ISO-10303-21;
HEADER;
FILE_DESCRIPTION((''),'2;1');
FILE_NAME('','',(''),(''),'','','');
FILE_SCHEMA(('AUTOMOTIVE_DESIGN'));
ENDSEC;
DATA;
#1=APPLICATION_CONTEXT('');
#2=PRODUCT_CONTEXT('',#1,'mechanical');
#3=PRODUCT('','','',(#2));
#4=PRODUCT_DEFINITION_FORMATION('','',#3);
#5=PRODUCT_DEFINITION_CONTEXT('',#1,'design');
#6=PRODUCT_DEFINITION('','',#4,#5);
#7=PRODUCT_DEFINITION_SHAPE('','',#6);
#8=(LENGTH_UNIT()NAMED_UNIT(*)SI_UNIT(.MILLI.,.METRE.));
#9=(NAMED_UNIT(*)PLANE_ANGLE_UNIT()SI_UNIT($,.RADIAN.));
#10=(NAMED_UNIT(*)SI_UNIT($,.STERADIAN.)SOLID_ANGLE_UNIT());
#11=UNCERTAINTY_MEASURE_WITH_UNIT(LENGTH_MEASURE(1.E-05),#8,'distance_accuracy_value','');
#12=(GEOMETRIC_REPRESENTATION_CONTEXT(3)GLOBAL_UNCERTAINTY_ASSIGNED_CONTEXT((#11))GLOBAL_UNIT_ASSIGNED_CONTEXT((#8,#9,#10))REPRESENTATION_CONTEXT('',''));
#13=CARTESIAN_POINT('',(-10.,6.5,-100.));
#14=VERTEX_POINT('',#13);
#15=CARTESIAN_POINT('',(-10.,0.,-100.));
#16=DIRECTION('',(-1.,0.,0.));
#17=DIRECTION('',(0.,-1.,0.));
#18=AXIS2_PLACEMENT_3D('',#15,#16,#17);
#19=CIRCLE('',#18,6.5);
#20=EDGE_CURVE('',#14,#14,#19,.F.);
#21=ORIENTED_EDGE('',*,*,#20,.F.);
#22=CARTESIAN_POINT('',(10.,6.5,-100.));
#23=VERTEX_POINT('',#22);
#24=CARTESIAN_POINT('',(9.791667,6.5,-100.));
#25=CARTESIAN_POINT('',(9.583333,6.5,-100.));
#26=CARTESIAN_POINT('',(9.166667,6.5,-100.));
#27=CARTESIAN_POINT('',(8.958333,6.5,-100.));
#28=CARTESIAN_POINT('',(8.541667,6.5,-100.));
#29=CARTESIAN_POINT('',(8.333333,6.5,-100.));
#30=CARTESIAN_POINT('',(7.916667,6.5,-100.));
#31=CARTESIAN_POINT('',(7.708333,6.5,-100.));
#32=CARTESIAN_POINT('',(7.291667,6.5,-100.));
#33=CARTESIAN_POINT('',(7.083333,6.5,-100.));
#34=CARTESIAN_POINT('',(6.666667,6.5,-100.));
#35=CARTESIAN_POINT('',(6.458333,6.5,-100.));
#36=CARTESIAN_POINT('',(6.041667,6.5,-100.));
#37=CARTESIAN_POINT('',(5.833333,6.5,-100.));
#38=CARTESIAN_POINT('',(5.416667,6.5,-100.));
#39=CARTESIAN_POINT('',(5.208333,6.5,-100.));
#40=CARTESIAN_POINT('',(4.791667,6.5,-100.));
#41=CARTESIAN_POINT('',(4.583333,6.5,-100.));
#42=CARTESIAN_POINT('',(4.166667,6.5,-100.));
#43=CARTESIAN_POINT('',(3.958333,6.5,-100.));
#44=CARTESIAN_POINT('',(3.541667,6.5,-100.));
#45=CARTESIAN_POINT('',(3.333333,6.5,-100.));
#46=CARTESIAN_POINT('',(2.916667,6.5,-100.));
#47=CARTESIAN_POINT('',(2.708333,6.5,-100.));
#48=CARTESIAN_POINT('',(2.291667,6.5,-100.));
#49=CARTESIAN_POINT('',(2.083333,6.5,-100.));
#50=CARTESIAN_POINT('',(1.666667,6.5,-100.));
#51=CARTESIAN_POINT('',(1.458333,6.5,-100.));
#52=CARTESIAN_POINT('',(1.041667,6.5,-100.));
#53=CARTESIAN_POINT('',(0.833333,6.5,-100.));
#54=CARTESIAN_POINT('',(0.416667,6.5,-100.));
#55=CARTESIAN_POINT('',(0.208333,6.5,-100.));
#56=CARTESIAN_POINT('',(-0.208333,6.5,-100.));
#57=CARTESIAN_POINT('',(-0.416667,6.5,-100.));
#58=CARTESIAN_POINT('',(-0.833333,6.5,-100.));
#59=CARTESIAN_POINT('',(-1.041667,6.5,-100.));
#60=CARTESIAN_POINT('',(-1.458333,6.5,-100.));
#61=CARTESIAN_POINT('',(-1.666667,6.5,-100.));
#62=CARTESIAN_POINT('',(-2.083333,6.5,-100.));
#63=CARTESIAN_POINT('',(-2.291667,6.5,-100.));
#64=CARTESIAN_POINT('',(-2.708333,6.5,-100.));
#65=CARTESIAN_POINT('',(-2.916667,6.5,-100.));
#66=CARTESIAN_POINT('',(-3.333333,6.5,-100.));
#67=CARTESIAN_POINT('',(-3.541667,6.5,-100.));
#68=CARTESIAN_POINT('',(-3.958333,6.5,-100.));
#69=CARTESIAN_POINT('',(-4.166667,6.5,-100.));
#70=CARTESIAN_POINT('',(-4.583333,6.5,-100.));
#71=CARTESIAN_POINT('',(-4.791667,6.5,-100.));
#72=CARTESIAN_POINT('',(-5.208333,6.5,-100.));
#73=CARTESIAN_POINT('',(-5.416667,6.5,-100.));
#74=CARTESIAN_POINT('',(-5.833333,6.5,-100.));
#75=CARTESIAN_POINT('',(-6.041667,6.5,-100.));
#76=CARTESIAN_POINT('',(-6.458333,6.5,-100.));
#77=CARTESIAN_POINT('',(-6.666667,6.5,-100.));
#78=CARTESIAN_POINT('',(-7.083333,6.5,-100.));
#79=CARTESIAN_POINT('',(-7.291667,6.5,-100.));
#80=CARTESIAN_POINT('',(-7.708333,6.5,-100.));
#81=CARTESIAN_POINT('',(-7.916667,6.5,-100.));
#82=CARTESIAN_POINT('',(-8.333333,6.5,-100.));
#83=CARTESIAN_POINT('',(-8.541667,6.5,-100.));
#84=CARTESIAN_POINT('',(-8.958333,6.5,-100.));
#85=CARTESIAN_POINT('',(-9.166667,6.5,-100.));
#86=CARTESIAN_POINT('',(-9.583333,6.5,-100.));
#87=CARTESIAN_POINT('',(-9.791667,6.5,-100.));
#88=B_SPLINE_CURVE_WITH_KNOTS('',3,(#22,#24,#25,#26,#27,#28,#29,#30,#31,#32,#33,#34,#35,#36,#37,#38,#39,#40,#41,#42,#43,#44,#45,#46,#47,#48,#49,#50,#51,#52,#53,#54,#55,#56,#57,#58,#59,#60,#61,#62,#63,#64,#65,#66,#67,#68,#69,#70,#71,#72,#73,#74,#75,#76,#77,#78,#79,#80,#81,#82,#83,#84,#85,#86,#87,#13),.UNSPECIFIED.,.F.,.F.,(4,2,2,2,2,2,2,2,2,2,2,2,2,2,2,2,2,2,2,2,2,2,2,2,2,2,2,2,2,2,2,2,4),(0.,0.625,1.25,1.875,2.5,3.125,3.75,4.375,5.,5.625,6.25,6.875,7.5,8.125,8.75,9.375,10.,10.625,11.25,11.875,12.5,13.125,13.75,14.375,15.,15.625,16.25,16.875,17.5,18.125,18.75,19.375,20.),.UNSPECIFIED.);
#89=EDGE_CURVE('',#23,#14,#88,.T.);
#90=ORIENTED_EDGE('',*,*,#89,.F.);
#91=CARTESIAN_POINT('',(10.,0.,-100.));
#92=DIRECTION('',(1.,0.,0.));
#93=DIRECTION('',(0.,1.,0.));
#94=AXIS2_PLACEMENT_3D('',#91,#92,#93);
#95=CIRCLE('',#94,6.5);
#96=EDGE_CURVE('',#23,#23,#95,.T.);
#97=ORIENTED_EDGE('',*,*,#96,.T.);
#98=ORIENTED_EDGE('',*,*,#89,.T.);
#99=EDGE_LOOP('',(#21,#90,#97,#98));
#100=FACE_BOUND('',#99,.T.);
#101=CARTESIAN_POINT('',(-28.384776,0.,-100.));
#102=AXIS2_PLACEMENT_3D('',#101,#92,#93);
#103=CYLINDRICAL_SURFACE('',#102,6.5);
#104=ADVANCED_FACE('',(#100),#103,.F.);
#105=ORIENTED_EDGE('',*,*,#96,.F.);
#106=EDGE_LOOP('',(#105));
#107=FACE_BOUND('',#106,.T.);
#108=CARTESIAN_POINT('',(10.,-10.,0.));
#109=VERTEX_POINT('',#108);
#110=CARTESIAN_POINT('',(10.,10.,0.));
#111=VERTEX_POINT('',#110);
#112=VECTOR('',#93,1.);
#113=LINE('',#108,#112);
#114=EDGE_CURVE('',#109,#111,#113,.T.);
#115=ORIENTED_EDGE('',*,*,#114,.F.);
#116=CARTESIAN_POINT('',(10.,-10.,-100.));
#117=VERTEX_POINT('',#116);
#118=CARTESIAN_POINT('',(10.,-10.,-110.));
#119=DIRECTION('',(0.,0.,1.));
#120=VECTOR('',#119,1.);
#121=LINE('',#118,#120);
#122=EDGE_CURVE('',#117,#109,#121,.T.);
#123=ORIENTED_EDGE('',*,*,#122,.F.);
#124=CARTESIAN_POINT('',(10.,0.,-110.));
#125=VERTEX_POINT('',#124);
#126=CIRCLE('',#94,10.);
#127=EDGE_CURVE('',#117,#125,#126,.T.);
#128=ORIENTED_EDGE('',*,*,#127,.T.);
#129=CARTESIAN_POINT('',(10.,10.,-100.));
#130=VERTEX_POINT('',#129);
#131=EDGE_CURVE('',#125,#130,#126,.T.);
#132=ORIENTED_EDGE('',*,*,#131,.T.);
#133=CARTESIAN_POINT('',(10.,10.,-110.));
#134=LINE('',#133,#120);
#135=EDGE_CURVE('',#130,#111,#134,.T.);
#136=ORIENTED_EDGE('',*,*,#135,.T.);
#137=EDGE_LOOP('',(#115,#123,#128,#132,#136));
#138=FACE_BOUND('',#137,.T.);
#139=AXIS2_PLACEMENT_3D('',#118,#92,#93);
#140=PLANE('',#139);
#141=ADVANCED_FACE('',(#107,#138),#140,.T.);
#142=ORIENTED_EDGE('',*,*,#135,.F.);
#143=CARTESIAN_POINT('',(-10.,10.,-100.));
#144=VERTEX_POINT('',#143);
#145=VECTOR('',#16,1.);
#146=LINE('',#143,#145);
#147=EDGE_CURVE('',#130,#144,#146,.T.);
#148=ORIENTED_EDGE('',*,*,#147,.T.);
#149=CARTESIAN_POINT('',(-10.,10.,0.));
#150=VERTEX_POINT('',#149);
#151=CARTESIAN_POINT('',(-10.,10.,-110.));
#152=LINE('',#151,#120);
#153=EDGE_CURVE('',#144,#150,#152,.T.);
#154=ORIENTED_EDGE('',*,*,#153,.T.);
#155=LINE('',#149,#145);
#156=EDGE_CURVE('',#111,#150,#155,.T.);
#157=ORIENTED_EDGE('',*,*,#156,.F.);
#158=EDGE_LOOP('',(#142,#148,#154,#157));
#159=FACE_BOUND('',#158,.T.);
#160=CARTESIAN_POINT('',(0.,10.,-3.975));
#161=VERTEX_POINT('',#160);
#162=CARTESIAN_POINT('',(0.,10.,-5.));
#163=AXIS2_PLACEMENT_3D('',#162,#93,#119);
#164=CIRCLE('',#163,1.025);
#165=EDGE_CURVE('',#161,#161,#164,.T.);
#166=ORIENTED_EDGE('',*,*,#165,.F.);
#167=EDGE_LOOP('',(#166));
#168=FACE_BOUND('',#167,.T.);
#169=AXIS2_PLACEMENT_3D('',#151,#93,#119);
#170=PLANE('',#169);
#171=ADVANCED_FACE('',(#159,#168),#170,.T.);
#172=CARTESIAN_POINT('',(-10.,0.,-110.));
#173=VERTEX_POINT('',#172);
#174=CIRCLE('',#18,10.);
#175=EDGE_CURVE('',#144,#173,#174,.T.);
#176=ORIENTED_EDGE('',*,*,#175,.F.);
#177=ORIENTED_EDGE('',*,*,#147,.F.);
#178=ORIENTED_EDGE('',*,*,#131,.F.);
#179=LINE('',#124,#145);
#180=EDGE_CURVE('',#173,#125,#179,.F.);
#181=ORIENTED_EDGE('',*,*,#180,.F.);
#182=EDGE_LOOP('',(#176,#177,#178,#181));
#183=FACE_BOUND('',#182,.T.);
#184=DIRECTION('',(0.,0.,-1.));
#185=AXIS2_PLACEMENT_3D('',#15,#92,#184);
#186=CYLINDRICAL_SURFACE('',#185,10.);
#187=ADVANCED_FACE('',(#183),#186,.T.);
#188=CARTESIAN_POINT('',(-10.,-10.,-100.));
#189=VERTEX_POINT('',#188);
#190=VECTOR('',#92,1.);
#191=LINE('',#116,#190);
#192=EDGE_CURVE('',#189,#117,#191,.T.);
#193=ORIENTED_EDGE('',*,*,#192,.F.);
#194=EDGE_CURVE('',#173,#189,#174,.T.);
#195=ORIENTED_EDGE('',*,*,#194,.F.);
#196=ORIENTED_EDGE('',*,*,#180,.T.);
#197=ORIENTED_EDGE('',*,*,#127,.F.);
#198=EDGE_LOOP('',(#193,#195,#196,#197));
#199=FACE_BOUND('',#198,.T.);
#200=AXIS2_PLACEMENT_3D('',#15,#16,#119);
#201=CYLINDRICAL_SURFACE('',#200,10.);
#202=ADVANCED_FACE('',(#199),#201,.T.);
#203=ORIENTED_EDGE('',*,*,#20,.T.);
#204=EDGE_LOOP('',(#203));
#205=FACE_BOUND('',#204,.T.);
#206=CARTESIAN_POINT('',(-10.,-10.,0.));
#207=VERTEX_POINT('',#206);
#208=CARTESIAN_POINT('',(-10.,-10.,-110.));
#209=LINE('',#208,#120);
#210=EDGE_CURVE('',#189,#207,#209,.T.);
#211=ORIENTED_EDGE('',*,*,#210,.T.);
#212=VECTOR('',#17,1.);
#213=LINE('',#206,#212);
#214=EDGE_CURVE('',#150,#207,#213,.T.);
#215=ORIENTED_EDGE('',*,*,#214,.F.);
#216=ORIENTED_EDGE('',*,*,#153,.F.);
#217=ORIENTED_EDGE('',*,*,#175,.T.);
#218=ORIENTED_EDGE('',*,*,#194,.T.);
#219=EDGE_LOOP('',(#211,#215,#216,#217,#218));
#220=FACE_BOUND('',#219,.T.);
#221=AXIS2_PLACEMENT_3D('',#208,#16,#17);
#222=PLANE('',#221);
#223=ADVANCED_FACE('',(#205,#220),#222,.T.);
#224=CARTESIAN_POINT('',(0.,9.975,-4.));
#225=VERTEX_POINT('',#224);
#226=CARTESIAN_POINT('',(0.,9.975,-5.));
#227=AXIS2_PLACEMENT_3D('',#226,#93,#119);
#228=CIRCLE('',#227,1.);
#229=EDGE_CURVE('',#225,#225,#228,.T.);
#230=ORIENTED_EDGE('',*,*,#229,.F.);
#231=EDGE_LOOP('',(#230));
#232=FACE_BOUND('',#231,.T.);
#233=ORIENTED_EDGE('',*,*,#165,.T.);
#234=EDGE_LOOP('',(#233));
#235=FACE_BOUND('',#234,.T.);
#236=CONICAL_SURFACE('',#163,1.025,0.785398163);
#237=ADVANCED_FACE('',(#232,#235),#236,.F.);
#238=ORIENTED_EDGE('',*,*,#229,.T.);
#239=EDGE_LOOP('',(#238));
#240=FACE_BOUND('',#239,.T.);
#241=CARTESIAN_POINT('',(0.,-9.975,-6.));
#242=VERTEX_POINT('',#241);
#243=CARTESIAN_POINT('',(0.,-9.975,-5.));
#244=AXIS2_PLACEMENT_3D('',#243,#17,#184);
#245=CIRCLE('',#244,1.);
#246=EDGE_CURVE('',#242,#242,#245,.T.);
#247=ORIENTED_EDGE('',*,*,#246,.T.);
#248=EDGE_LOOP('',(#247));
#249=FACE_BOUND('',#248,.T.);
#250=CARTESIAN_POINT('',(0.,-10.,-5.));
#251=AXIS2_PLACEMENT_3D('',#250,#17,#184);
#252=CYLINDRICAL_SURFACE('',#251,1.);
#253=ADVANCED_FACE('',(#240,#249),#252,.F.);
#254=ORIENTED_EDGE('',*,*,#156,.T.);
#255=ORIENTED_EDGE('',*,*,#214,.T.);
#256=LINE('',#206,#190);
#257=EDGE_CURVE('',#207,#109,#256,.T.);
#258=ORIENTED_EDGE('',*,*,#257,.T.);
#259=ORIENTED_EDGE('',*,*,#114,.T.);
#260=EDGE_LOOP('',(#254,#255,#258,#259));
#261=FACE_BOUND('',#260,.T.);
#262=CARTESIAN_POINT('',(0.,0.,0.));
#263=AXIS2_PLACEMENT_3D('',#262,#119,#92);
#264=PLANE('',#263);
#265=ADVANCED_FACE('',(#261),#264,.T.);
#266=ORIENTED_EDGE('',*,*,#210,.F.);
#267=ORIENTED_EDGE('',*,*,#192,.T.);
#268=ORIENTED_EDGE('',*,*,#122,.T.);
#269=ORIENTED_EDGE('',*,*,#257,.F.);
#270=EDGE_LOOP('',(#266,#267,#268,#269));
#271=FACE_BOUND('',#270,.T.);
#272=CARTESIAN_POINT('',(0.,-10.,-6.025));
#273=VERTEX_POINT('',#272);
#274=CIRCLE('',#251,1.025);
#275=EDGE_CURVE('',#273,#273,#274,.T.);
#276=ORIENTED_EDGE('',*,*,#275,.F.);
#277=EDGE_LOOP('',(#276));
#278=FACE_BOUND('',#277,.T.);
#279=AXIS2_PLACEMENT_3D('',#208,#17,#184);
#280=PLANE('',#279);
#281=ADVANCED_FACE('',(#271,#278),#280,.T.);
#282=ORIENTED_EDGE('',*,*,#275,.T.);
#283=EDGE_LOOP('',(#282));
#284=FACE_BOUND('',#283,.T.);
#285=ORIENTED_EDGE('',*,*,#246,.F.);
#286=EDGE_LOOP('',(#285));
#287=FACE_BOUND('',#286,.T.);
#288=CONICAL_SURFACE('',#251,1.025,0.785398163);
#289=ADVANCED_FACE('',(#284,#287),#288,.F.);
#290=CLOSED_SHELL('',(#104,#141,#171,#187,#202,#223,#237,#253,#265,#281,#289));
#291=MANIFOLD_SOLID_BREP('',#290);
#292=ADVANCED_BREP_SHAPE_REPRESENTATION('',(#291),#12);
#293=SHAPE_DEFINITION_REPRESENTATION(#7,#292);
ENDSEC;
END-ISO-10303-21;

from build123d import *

# Parameters (mm, degrees)
SKETCH1_W                       = 20
SKETCH1_H                       = 20
BOSS_EXTRUDE1_DEPTH             = 110
FILLET1_R                       = 10
SKETCH2_R                       = 6.5
CUT_EXTRUDE1_DEPTH              = 20
F_2_0MM_DOWEL_HOLE1_D           = 2
F_2_0MM_DOWEL_HOLE1_CSINK_D     = 2.05
F_2_0MM_DOWEL_HOLE1_CSINK_ANGLE = 90


with BuildPart() as part:
    # Sketch1 → Boss-Extrude1 (new body)
    with BuildSketch(Plane(origin=(0, 0, 0), x_dir=(0, 1, 0), z_dir=(0, 0, 1))):
        Rectangle(SKETCH1_W, SKETCH1_H)
    extrude(amount=-BOSS_EXTRUDE1_DEPTH)

    # Fillet1
    fillet1_edges = [part.edges().sort_by_distance(p)[0] for p in [
        (0, -10, -110),
        (0, 10, -110),
    ]]
    fillet(fillet1_edges, radius=FILLET1_R - 0.0001)  # a hair under: the kernel refuses the full size

    # Sketch2 → Cut-Extrude1 (cut)
    with BuildSketch(Plane.YZ.offset(10)):
        with Locations((0, -100)):
            Circle(SKETCH2_R)
    extrude(amount=-CUT_EXTRUDE1_DEPTH, mode=Mode.SUBTRACT)

    # Ø2.0mm Dowel Hole1 (through all)
    with Locations(Plane.XZ.offset(10)):
        with Locations((0, -5)):
            f_2_0mm_dowel_hole1 = CounterSinkHole(F_2_0MM_DOWEL_HOLE1_D / 2, F_2_0MM_DOWEL_HOLE1_CSINK_D / 2, counter_sink_angle=F_2_0MM_DOWEL_HOLE1_CSINK_ANGLE)

    # Mirror1: Ø2.0mm Dowel Hole1 across plane
    add(f_2_0mm_dowel_hole1.mirror(Plane.ZX), mode=Mode.SUBTRACT)


solid = part.part
